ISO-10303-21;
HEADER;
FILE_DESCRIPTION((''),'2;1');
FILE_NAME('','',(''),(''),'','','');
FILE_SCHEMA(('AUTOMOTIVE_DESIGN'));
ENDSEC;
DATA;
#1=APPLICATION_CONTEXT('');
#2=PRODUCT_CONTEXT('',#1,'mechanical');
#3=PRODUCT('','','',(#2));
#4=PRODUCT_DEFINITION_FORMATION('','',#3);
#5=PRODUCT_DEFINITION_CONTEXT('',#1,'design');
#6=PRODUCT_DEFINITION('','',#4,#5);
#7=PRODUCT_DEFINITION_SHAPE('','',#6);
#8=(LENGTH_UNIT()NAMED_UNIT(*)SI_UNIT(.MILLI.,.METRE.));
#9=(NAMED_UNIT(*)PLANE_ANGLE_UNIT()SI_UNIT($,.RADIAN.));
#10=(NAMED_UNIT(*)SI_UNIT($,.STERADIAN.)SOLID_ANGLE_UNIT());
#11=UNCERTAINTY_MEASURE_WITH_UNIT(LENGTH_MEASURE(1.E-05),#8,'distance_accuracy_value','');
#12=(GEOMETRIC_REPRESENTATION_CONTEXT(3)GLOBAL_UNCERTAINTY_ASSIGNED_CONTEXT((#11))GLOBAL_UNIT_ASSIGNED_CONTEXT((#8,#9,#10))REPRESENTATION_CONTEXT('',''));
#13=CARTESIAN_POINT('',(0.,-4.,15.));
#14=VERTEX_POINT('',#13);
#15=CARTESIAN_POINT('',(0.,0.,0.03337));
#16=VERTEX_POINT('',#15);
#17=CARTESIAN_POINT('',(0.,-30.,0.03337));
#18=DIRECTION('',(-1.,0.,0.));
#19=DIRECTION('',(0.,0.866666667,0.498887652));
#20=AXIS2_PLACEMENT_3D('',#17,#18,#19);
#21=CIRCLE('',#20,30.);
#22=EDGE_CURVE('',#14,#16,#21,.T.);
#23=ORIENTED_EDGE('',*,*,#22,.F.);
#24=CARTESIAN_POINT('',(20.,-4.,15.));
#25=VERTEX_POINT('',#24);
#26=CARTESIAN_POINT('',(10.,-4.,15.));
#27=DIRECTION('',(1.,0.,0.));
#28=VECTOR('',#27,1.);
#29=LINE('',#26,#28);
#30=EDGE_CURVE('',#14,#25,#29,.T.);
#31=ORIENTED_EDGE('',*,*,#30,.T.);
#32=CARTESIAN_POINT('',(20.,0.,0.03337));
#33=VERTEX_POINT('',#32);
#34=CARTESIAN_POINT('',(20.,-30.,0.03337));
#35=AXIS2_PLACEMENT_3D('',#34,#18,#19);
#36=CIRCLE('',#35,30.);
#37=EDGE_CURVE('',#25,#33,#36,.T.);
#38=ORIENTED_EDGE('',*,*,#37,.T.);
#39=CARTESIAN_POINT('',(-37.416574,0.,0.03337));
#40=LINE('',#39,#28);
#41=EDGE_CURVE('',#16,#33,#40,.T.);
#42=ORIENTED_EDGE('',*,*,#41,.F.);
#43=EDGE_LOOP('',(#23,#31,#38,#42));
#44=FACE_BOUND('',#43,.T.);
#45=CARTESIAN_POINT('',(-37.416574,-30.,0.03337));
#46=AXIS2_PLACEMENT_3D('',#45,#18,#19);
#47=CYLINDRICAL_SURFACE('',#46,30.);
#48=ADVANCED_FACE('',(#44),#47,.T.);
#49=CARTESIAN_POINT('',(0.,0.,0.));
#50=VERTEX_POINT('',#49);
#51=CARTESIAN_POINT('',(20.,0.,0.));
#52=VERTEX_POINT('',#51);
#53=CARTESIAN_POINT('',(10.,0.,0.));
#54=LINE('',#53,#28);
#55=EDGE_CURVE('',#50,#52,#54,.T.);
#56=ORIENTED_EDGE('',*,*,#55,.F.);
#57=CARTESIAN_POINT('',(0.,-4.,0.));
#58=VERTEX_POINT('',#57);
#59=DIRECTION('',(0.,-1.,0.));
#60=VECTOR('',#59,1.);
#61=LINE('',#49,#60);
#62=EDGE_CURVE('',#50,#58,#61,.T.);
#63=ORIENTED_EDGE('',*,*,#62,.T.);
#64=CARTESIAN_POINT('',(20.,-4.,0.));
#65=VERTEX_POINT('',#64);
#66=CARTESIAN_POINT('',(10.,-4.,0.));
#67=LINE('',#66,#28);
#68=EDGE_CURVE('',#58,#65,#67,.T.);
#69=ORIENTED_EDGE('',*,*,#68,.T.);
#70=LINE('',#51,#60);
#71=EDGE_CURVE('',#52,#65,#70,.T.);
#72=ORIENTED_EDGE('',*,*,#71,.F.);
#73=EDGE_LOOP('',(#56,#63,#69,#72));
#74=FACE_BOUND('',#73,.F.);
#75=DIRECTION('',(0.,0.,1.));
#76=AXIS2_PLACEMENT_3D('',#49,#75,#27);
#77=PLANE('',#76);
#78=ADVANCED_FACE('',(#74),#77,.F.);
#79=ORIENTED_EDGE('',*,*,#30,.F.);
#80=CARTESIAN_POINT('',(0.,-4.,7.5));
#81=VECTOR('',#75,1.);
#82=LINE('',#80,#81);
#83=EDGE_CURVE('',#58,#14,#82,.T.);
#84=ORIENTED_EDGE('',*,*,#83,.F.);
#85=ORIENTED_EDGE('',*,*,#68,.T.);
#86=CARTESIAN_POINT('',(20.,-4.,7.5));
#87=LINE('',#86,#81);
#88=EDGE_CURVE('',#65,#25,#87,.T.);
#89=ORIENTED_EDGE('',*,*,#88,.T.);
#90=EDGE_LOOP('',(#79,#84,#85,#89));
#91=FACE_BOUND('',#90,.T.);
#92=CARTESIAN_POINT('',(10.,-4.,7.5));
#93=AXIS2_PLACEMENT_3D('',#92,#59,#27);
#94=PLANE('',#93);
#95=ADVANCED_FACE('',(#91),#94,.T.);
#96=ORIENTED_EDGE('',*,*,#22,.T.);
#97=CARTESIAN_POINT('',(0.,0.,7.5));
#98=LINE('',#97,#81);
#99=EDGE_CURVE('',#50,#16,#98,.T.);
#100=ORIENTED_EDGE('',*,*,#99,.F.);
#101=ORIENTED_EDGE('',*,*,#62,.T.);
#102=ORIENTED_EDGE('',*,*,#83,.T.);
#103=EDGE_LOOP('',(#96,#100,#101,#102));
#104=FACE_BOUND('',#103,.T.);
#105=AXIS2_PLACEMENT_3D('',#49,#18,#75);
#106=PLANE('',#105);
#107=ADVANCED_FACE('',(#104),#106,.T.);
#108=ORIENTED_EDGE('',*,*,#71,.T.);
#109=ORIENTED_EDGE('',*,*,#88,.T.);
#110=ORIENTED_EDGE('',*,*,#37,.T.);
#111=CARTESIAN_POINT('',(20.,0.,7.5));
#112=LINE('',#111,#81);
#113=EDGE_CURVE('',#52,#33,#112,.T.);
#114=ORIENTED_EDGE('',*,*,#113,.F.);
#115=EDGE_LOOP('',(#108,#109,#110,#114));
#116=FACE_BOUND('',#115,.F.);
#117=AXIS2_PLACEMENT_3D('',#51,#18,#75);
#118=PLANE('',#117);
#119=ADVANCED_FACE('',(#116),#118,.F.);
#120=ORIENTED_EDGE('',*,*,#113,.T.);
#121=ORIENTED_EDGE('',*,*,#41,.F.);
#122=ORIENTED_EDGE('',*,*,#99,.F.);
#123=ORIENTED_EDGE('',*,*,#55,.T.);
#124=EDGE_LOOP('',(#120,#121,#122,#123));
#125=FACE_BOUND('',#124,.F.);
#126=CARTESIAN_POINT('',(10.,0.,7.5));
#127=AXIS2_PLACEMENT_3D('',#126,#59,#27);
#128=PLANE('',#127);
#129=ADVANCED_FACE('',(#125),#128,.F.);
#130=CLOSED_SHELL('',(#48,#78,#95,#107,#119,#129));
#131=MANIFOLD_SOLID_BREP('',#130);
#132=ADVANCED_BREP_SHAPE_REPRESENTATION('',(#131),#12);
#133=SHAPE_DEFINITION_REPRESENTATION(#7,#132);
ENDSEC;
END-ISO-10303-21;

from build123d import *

# Parameters (mm, degrees)
F0_W        = 20
F0_H        = 15
F1_DEPTH    = 4
F2_T1_DEPTH = 94.8331477355


# Not quite as in the source:
# - a fillet or chamfer that OpenCascade refuses, or shapes differently, is made with other operations: its cross-section is extruded or revolved along the edge and cut away or added


with BuildPart() as f1:
    # F0 (on Front) → F1 (new body)
    with BuildSketch(Plane.XZ):
        with Locations((10, 7.5)):
            Rectangle(F0_W, F0_H)
    extrude(amount=F1_DEPTH)

    # F2: fillet of radius 30 on 1 edges, made by hand

    # F2_s2 → F2_t1 (cut)
    with BuildSketch(Plane.YZ.offset(-37.4165738677)):
        with BuildLine():
            ThreePointArc((-4, 15), (-1.0172465076, 7.7793371453), (0, 0.0333704529))
            Line((0, 0.0333704529), (0.6, 0.0333704529))
            Line((0.6, 0.0333704529), (0.6, 15))
            Line((0.6, 15), (0, 15.6))
            ThreePointArc((0, 15.6), (-2, 15.6), (-3.48, 15.2993325909))
            Line((-3.48, 15.2993325909), (-4, 15))
        make_face()
    extrude(amount=F2_T1_DEPTH, mode=Mode.SUBTRACT)


solid = f1.part
